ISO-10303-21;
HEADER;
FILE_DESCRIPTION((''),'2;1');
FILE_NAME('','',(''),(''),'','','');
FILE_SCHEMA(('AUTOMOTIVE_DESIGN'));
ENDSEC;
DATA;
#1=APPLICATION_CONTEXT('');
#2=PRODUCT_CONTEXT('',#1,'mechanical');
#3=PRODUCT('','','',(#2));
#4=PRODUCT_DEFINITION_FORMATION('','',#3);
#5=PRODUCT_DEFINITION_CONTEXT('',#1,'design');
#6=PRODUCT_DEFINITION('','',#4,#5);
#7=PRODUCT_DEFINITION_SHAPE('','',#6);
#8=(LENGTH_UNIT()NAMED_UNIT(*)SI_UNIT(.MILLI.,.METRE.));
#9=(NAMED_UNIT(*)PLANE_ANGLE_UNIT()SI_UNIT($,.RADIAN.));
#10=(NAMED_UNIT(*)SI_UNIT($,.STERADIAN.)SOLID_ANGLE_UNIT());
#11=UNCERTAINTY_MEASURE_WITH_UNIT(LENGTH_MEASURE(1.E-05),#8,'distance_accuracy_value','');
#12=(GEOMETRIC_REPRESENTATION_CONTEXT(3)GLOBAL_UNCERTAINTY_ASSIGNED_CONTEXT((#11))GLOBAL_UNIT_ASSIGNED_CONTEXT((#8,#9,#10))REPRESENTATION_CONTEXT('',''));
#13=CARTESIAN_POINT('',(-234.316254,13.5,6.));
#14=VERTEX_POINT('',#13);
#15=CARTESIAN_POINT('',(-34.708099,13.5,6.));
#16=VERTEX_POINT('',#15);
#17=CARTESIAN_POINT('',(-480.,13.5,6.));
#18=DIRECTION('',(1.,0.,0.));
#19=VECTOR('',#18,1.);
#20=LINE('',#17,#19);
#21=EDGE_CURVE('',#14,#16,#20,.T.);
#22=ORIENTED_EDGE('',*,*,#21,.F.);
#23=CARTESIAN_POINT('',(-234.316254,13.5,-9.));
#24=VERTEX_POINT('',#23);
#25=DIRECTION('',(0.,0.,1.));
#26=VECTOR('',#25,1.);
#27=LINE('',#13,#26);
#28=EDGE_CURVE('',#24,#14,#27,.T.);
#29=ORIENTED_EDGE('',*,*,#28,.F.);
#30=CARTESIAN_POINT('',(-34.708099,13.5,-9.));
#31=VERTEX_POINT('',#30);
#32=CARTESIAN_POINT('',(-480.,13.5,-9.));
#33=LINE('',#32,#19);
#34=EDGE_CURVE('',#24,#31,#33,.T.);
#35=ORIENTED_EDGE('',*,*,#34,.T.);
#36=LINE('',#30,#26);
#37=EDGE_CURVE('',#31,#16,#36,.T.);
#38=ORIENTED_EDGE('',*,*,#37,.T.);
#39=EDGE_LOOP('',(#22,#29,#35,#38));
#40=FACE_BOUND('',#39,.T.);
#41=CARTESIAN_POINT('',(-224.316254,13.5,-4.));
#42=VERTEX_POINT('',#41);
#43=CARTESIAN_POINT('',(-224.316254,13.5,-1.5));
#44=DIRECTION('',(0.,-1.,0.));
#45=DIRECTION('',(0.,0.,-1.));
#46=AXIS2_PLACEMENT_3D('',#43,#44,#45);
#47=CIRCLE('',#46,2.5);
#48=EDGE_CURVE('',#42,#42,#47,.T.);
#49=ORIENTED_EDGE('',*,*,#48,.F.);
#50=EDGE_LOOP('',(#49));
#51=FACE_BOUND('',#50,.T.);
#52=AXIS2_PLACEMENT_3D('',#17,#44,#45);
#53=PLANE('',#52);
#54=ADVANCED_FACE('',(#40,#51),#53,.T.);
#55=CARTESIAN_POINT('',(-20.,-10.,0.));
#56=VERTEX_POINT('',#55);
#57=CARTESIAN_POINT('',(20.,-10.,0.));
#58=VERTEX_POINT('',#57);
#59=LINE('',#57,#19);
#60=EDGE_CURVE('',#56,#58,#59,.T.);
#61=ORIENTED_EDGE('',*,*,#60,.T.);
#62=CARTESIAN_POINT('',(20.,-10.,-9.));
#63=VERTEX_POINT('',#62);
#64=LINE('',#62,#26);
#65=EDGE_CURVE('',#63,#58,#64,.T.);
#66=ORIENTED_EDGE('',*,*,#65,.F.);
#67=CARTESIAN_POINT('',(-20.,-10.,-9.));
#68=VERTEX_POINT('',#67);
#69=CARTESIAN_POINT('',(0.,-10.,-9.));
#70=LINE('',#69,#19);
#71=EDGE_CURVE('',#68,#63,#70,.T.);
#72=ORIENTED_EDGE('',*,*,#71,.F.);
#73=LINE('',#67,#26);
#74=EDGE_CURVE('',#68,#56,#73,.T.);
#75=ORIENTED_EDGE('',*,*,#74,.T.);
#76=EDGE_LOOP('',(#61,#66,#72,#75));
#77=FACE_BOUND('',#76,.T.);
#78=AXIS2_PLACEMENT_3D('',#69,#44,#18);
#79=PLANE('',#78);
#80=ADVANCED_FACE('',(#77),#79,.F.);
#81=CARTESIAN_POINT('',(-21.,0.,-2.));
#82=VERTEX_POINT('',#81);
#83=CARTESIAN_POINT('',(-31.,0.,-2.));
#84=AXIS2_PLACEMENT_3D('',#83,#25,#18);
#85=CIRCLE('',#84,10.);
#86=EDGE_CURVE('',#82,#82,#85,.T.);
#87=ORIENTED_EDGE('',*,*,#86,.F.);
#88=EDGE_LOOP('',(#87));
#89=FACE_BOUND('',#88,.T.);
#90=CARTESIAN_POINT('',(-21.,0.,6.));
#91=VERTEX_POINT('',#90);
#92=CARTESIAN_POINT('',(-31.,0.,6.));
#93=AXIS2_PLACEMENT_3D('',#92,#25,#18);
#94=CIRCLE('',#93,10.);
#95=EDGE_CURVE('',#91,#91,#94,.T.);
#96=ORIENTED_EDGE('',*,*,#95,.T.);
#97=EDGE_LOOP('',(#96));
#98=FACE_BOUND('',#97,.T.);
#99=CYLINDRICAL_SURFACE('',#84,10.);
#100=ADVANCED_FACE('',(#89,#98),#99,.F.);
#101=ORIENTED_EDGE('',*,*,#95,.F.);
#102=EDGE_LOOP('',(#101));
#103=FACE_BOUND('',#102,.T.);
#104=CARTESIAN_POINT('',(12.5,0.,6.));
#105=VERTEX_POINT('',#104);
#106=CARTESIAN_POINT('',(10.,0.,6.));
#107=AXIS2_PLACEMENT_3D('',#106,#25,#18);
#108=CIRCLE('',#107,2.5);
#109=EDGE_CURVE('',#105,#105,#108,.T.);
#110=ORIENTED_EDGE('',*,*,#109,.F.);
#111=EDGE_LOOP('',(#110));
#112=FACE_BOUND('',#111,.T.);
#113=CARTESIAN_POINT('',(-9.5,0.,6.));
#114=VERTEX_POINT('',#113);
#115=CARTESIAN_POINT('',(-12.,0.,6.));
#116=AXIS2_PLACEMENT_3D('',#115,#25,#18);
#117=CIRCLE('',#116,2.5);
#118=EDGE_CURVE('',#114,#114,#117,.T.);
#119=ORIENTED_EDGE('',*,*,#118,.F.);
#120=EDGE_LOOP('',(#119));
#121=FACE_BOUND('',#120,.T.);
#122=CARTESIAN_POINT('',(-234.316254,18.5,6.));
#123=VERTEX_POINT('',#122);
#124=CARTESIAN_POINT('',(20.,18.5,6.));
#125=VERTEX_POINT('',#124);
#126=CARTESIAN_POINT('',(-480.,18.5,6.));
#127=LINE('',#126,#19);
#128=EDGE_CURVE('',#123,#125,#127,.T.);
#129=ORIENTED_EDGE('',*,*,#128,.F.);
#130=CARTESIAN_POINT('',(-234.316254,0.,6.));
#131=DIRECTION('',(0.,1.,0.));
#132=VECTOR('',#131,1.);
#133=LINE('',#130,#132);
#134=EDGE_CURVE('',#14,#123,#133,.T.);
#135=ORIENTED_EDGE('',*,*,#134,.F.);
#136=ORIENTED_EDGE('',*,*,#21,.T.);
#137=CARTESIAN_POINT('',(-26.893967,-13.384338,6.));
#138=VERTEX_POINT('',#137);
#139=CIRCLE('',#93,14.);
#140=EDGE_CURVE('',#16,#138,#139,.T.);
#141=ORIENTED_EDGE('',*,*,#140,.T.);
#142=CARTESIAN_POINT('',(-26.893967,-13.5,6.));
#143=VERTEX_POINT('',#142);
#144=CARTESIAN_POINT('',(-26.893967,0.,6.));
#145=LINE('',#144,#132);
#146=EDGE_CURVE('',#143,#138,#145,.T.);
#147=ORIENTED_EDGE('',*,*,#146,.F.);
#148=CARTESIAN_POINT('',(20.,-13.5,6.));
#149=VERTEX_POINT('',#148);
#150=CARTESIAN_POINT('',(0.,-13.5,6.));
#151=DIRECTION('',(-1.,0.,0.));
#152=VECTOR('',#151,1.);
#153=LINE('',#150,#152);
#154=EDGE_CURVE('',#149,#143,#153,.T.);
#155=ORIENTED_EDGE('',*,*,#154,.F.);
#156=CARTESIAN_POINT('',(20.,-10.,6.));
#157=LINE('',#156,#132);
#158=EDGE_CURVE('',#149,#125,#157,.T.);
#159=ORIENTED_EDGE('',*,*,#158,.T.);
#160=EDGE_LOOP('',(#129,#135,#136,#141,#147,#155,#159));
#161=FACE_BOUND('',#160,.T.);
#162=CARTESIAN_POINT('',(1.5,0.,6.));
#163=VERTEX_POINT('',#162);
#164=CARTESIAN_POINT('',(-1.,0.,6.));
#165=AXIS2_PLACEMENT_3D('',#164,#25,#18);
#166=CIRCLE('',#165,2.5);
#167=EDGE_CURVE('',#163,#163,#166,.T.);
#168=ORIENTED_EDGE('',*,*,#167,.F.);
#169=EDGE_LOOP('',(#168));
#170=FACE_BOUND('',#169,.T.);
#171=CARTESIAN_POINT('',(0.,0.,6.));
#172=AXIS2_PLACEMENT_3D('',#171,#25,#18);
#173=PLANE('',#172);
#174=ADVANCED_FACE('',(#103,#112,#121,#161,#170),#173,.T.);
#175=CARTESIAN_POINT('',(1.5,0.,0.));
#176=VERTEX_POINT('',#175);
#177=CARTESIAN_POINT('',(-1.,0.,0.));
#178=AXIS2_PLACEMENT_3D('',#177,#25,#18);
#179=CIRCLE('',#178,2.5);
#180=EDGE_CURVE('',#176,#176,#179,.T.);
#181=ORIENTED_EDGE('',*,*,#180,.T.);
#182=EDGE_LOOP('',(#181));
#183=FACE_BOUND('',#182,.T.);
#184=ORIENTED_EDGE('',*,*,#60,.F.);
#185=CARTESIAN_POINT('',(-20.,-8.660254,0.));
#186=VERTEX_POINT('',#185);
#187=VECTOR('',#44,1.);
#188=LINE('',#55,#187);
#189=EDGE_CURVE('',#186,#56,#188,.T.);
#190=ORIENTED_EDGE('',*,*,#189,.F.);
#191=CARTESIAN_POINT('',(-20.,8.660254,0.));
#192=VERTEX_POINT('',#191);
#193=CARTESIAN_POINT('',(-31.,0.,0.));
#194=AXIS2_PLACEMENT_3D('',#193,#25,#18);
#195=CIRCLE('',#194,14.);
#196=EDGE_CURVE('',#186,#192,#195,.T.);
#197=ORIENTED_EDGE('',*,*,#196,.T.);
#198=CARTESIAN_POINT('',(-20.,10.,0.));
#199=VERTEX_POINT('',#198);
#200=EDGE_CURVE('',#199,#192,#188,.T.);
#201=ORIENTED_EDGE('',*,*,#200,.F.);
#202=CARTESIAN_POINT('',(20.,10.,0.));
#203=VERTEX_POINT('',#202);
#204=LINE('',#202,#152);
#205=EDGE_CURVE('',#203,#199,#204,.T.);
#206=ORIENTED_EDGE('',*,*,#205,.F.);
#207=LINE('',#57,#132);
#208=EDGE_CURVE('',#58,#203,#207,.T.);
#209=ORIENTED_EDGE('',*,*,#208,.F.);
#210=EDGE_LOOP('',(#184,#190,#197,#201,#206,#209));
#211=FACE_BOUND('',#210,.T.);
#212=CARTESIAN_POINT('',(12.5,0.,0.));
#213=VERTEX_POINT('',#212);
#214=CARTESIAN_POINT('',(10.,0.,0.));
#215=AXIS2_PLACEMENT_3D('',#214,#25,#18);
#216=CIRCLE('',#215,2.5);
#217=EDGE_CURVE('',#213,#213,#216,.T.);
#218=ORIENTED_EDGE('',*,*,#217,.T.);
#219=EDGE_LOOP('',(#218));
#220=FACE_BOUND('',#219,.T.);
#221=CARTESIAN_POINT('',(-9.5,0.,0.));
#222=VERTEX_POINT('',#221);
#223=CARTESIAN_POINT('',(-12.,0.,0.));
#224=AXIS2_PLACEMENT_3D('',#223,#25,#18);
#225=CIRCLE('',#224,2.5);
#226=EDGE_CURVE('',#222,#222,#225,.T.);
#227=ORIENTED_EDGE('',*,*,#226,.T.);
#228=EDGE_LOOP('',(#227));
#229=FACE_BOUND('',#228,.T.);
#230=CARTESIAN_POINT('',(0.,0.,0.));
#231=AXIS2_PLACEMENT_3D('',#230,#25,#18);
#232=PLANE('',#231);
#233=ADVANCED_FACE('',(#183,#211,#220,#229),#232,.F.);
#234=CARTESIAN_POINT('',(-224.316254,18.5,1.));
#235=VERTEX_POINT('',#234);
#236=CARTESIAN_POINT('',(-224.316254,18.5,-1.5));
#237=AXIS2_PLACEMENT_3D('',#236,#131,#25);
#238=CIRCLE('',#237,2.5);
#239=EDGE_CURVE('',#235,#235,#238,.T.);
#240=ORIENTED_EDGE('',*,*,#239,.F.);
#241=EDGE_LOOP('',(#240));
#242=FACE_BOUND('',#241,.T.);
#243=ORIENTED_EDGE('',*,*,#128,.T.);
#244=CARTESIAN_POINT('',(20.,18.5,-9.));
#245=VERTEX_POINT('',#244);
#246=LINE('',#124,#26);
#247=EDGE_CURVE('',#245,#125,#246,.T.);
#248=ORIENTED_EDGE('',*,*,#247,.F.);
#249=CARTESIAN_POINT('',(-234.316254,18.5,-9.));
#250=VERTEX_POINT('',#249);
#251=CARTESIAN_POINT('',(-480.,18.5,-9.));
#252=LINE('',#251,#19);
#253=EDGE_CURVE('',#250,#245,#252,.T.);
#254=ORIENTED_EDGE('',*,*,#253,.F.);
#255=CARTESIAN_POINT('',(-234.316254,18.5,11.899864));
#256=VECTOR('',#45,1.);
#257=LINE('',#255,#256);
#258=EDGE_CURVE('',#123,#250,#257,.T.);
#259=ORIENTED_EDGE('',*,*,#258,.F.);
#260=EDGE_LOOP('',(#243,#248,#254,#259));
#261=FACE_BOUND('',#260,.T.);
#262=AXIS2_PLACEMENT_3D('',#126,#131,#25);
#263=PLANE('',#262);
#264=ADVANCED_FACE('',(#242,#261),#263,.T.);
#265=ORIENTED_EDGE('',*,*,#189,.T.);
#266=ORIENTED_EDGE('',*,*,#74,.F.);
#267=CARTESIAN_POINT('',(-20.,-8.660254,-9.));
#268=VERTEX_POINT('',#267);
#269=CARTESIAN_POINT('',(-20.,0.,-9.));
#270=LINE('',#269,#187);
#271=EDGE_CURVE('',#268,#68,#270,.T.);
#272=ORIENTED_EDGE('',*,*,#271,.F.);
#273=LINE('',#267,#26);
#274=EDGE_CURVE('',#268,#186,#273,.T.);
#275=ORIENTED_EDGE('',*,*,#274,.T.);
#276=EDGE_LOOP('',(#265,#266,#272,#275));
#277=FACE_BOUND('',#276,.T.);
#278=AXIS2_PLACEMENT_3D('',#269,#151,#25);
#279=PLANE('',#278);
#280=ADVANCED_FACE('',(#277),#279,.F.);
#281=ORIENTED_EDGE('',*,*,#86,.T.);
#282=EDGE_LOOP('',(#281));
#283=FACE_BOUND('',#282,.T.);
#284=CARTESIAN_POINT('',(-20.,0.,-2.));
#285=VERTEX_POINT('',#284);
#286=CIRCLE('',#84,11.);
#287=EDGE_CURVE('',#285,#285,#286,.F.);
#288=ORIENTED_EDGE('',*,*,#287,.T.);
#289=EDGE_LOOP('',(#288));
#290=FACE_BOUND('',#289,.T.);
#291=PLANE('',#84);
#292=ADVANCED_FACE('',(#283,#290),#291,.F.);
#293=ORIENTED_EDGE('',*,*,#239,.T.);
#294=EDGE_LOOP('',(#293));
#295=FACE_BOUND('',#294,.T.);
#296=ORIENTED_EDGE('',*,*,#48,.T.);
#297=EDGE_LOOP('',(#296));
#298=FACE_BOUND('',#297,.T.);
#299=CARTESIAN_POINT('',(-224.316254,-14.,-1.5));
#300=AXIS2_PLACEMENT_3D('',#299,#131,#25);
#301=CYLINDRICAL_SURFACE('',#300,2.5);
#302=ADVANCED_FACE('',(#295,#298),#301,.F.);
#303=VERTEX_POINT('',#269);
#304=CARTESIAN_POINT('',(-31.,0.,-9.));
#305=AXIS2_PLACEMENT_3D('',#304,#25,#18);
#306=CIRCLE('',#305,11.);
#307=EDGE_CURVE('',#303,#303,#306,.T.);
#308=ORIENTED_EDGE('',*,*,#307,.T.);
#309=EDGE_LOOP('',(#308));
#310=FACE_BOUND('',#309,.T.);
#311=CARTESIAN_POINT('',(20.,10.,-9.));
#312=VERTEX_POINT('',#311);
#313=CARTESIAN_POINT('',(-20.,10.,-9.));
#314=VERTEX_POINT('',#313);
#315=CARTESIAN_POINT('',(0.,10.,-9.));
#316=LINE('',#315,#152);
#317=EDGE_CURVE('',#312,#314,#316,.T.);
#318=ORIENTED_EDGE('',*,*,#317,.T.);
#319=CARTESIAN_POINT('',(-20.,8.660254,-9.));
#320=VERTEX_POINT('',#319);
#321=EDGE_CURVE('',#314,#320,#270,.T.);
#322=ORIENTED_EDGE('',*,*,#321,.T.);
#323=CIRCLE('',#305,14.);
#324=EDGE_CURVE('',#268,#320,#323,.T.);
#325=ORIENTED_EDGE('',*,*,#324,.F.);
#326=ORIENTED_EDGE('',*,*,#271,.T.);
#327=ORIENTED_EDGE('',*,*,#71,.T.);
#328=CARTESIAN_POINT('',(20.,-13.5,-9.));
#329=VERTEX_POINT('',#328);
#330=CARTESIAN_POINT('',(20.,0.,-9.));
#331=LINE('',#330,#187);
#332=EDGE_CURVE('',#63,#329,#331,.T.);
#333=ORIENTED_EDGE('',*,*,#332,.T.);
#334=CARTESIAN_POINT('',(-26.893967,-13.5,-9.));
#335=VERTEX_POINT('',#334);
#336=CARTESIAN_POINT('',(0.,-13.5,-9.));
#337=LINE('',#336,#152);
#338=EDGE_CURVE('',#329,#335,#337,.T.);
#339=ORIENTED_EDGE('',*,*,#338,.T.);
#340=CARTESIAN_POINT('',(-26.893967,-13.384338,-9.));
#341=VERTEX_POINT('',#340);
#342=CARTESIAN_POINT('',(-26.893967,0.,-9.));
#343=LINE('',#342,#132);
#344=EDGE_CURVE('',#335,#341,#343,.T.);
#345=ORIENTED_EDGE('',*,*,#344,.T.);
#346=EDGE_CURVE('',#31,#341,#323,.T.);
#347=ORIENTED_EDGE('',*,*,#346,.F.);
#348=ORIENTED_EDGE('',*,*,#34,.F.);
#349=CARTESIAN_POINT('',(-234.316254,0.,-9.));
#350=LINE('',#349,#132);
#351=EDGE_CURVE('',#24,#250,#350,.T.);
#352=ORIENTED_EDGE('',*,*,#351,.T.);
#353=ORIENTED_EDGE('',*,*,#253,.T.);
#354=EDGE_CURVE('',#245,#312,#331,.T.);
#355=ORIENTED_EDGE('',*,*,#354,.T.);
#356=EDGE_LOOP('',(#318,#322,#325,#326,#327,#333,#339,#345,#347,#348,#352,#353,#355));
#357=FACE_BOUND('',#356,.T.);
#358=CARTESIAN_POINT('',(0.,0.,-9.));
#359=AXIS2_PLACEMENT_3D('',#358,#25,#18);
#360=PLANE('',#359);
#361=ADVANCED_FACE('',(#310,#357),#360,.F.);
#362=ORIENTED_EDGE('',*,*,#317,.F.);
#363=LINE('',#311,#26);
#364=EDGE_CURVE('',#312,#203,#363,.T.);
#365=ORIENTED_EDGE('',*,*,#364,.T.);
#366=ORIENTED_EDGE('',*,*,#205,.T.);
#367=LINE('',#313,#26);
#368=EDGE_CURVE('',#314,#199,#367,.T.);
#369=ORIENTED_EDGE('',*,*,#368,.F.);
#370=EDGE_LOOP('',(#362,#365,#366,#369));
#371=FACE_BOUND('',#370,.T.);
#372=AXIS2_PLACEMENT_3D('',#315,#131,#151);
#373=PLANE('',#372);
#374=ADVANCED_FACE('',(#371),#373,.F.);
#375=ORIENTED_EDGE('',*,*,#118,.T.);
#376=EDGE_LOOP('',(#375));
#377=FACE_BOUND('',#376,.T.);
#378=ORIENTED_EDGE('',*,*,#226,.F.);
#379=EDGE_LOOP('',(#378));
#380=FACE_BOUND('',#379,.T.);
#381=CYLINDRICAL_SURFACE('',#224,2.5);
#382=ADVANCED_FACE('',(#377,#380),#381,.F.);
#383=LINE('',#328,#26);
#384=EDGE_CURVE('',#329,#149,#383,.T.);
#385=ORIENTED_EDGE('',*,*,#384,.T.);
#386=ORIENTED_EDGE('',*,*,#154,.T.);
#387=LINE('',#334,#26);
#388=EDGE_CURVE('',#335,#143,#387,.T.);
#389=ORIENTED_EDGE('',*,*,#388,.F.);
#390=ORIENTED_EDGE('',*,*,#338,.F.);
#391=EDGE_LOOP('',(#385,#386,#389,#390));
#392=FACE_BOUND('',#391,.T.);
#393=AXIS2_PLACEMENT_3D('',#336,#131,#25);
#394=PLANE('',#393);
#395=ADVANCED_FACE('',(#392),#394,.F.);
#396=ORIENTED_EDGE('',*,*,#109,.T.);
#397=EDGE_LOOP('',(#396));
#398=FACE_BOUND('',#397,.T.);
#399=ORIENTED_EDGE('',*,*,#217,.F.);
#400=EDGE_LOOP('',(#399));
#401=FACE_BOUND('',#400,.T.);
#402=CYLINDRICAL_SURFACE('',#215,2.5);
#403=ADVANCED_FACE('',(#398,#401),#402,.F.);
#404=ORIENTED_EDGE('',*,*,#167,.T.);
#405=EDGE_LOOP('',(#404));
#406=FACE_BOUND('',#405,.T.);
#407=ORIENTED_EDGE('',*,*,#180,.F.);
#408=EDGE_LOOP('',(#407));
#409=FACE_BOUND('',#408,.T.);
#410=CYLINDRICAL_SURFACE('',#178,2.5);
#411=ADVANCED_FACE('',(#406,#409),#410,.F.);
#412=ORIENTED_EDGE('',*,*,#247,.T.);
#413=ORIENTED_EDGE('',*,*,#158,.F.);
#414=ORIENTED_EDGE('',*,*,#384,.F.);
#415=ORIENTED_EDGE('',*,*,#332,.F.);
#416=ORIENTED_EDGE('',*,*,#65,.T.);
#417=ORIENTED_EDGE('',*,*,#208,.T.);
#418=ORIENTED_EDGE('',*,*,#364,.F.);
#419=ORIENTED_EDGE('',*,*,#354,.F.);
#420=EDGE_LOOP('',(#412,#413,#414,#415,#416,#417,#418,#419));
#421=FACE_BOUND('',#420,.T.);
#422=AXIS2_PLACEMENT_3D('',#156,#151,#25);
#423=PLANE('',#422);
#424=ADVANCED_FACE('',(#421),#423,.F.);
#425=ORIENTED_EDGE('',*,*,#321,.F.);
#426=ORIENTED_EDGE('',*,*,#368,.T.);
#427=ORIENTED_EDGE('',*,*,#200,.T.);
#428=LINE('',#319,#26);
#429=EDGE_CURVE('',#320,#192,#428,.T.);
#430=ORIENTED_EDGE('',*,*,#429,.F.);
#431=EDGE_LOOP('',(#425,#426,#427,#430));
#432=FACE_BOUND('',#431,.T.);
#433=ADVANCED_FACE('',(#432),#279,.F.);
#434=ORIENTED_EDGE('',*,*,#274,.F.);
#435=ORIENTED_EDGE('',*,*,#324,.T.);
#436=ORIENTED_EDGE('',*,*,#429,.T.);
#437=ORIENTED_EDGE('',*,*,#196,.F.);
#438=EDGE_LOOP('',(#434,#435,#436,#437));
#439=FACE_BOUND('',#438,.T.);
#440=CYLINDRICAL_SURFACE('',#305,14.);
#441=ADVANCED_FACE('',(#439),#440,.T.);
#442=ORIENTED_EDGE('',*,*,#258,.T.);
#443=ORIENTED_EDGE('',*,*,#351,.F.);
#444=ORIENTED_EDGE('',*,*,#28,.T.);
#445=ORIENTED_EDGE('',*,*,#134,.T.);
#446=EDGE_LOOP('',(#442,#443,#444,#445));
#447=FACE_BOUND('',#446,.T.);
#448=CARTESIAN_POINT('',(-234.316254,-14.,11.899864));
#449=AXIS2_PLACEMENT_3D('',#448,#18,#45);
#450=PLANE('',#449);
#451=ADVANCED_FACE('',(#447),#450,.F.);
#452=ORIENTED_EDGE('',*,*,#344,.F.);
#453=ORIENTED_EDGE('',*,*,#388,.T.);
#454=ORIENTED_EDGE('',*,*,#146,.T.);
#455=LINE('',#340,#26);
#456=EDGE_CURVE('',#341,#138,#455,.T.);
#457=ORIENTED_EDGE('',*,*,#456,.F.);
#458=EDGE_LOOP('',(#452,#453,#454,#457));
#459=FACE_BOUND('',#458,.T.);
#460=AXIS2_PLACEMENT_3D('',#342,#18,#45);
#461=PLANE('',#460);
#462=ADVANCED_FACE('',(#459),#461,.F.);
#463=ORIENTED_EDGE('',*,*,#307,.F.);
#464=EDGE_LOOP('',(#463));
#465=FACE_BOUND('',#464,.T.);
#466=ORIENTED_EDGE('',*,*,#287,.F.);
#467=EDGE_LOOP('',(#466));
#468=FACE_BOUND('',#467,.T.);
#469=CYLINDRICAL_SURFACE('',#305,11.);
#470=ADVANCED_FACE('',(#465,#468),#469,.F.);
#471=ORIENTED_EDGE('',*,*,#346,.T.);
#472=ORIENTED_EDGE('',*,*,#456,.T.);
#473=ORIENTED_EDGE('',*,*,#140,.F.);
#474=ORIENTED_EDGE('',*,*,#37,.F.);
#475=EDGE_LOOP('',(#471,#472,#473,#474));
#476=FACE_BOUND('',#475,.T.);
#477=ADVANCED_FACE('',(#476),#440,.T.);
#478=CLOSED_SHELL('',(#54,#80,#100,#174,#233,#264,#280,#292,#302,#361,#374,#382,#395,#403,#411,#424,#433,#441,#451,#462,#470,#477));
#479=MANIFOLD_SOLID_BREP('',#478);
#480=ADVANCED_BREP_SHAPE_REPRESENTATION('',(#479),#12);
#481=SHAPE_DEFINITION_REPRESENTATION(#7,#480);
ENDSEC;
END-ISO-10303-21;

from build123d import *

# Parameters (mm, degrees)
SKETCH_1_W          = 40
SKETCH_1_H          = 20
EXTRUDE_1_DEPTH     = 6
SKETCH_2_R          = 2.5
CUT_EXTRUDE_1_DEPTH = 24.151673806
EXTRUDE_START       = -15
EXTRUDE_2_OUTLINE_R = 11
EXTRUDE_2_DEPTH     = 15
EXTRUDE_START_2     = -8
SKETCH_5_R          = 11
SKETCH_5_R_2        = 10
EXTRUDE_3_DEPTH     = 8
SKETCH_8_W          = 15
SKETCH_8_H          = 5
EXTRUDE_4_DEPTH     = 500
SKETCH_9_W          = 4.037306924
SKETCH_9_H          = 3.364422437
EXTRUDE_5_DEPTH     = 15
SKETCH_11_W         = 261.320344598
SKETCH_11_H         = 37.265148186
CUT_EXTRUDE_2_DEPTH = 482.183177179
SKETCH_12_R         = 2.5
CUT_EXTRUDE_3_DEPTH = 237.730557242


# Read off the part's stored shape, not the designer's step: 凸台-拉伸2
with BuildPart() as part:
    # 草图1 → 凸台-拉伸1 (new body)
    with BuildSketch(Plane.XY):
        Rectangle(SKETCH_1_W, SKETCH_1_H)
    extrude(amount=EXTRUDE_1_DEPTH)

    # 草图2 → 切除-拉伸1 (cut, through all)
    with BuildSketch(Plane.XY.offset(6)):
        with Locations((10, 0)):
            Circle(SKETCH_2_R)
        with Locations((-1, 0)):
            Circle(SKETCH_2_R)
        with Locations((-12, 0)):
            Circle(SKETCH_2_R)
    extrude(amount=-CUT_EXTRUDE_1_DEPTH, mode=Mode.SUBTRACT)

    # 凸台-拉伸2 outline → 凸台-拉伸2 (add)
    with BuildSketch(Plane.XY.offset(6).offset(EXTRUDE_START)):
        with BuildLine():
            Line((20, 10), (20, 13.5))
            Line((20, 13.5), (-26.893967141, 13.5))
            Line((-26.893967141, 13.5), (-26.893967141, 13.384337644))
            ThreePointArc((-26.893967141, 13.384337644), (-45, 0), (-26.893967141, -13.384337644))
            Line((-26.893967141, -13.384337644), (-26.893967141, -13.5))
            Line((-26.893967141, -13.5), (20, -13.5))
            Line((20, -13.5), (20, -10))
            Line((20, -10), (-20, -10))
            Line((-20, -10), (-20, -8.660254038))
            ThreePointArc((-20, -8.660254038), (-17, 0), (-20, 8.660254038))
            Line((-20, 8.660254038), (-20, 10))
            Line((-20, 10), (20, 10))
        make_face()
        with Locations((-31, 0)):
            Circle(EXTRUDE_2_OUTLINE_R, mode=Mode.SUBTRACT)
    extrude(amount=EXTRUDE_2_DEPTH)

    # 草图5 → 凸台-拉伸3 (add)
    with BuildSketch(Plane.XY.offset(6).offset(EXTRUDE_START_2)):
        with Locations((-31, 0)):
            Circle(SKETCH_5_R)
        with Locations((-31, 0)):
            Circle(SKETCH_5_R_2, mode=Mode.SUBTRACT)
    extrude(amount=EXTRUDE_3_DEPTH)

    # 草图8 → 凸台-拉伸4 (add)
    with BuildSketch(Plane(origin=(20, 0, 0), x_dir=(0, 0, -1), z_dir=(1, 0, 0))):
        with Locations((1.5, 16)):
            Rectangle(SKETCH_8_W, SKETCH_8_H)
    extrude(amount=-EXTRUDE_4_DEPTH)

    # 草图9 → 凸台-拉伸5 (add, through all)
    with BuildSketch(Plane(origin=(0, 0, -9), x_dir=(-1, 0, 0), z_dir=(0, 0, -1))):
        with Locations((26.475334378, 14.151164675)):
            Rectangle(SKETCH_9_W, SKETCH_9_H)
    extrude(amount=-EXTRUDE_5_DEPTH)

    # 草图11 → 切除-拉伸2 (cut, through all)
    with BuildSketch(Plane(origin=(0, 18.5, 0), x_dir=(1, 0, 0), z_dir=(0, 1, 0))):
        with Locations((-364.976425965, 6.732710128)):
            Rectangle(SKETCH_11_W, SKETCH_11_H)
    extrude(amount=-CUT_EXTRUDE_2_DEPTH, mode=Mode.SUBTRACT)

    # 草图12 → 切除-拉伸3 (cut, through all)
    with BuildSketch(Plane(origin=(0, 18.5, 0), x_dir=(1, 0, 0), z_dir=(0, 1, 0))):
        with Locations(Location((-224.316253666, 1.5, 0), (0, 0, 270))):
            Circle(SKETCH_12_R)
    extrude(amount=-CUT_EXTRUDE_3_DEPTH, mode=Mode.SUBTRACT)


solid = part.part
